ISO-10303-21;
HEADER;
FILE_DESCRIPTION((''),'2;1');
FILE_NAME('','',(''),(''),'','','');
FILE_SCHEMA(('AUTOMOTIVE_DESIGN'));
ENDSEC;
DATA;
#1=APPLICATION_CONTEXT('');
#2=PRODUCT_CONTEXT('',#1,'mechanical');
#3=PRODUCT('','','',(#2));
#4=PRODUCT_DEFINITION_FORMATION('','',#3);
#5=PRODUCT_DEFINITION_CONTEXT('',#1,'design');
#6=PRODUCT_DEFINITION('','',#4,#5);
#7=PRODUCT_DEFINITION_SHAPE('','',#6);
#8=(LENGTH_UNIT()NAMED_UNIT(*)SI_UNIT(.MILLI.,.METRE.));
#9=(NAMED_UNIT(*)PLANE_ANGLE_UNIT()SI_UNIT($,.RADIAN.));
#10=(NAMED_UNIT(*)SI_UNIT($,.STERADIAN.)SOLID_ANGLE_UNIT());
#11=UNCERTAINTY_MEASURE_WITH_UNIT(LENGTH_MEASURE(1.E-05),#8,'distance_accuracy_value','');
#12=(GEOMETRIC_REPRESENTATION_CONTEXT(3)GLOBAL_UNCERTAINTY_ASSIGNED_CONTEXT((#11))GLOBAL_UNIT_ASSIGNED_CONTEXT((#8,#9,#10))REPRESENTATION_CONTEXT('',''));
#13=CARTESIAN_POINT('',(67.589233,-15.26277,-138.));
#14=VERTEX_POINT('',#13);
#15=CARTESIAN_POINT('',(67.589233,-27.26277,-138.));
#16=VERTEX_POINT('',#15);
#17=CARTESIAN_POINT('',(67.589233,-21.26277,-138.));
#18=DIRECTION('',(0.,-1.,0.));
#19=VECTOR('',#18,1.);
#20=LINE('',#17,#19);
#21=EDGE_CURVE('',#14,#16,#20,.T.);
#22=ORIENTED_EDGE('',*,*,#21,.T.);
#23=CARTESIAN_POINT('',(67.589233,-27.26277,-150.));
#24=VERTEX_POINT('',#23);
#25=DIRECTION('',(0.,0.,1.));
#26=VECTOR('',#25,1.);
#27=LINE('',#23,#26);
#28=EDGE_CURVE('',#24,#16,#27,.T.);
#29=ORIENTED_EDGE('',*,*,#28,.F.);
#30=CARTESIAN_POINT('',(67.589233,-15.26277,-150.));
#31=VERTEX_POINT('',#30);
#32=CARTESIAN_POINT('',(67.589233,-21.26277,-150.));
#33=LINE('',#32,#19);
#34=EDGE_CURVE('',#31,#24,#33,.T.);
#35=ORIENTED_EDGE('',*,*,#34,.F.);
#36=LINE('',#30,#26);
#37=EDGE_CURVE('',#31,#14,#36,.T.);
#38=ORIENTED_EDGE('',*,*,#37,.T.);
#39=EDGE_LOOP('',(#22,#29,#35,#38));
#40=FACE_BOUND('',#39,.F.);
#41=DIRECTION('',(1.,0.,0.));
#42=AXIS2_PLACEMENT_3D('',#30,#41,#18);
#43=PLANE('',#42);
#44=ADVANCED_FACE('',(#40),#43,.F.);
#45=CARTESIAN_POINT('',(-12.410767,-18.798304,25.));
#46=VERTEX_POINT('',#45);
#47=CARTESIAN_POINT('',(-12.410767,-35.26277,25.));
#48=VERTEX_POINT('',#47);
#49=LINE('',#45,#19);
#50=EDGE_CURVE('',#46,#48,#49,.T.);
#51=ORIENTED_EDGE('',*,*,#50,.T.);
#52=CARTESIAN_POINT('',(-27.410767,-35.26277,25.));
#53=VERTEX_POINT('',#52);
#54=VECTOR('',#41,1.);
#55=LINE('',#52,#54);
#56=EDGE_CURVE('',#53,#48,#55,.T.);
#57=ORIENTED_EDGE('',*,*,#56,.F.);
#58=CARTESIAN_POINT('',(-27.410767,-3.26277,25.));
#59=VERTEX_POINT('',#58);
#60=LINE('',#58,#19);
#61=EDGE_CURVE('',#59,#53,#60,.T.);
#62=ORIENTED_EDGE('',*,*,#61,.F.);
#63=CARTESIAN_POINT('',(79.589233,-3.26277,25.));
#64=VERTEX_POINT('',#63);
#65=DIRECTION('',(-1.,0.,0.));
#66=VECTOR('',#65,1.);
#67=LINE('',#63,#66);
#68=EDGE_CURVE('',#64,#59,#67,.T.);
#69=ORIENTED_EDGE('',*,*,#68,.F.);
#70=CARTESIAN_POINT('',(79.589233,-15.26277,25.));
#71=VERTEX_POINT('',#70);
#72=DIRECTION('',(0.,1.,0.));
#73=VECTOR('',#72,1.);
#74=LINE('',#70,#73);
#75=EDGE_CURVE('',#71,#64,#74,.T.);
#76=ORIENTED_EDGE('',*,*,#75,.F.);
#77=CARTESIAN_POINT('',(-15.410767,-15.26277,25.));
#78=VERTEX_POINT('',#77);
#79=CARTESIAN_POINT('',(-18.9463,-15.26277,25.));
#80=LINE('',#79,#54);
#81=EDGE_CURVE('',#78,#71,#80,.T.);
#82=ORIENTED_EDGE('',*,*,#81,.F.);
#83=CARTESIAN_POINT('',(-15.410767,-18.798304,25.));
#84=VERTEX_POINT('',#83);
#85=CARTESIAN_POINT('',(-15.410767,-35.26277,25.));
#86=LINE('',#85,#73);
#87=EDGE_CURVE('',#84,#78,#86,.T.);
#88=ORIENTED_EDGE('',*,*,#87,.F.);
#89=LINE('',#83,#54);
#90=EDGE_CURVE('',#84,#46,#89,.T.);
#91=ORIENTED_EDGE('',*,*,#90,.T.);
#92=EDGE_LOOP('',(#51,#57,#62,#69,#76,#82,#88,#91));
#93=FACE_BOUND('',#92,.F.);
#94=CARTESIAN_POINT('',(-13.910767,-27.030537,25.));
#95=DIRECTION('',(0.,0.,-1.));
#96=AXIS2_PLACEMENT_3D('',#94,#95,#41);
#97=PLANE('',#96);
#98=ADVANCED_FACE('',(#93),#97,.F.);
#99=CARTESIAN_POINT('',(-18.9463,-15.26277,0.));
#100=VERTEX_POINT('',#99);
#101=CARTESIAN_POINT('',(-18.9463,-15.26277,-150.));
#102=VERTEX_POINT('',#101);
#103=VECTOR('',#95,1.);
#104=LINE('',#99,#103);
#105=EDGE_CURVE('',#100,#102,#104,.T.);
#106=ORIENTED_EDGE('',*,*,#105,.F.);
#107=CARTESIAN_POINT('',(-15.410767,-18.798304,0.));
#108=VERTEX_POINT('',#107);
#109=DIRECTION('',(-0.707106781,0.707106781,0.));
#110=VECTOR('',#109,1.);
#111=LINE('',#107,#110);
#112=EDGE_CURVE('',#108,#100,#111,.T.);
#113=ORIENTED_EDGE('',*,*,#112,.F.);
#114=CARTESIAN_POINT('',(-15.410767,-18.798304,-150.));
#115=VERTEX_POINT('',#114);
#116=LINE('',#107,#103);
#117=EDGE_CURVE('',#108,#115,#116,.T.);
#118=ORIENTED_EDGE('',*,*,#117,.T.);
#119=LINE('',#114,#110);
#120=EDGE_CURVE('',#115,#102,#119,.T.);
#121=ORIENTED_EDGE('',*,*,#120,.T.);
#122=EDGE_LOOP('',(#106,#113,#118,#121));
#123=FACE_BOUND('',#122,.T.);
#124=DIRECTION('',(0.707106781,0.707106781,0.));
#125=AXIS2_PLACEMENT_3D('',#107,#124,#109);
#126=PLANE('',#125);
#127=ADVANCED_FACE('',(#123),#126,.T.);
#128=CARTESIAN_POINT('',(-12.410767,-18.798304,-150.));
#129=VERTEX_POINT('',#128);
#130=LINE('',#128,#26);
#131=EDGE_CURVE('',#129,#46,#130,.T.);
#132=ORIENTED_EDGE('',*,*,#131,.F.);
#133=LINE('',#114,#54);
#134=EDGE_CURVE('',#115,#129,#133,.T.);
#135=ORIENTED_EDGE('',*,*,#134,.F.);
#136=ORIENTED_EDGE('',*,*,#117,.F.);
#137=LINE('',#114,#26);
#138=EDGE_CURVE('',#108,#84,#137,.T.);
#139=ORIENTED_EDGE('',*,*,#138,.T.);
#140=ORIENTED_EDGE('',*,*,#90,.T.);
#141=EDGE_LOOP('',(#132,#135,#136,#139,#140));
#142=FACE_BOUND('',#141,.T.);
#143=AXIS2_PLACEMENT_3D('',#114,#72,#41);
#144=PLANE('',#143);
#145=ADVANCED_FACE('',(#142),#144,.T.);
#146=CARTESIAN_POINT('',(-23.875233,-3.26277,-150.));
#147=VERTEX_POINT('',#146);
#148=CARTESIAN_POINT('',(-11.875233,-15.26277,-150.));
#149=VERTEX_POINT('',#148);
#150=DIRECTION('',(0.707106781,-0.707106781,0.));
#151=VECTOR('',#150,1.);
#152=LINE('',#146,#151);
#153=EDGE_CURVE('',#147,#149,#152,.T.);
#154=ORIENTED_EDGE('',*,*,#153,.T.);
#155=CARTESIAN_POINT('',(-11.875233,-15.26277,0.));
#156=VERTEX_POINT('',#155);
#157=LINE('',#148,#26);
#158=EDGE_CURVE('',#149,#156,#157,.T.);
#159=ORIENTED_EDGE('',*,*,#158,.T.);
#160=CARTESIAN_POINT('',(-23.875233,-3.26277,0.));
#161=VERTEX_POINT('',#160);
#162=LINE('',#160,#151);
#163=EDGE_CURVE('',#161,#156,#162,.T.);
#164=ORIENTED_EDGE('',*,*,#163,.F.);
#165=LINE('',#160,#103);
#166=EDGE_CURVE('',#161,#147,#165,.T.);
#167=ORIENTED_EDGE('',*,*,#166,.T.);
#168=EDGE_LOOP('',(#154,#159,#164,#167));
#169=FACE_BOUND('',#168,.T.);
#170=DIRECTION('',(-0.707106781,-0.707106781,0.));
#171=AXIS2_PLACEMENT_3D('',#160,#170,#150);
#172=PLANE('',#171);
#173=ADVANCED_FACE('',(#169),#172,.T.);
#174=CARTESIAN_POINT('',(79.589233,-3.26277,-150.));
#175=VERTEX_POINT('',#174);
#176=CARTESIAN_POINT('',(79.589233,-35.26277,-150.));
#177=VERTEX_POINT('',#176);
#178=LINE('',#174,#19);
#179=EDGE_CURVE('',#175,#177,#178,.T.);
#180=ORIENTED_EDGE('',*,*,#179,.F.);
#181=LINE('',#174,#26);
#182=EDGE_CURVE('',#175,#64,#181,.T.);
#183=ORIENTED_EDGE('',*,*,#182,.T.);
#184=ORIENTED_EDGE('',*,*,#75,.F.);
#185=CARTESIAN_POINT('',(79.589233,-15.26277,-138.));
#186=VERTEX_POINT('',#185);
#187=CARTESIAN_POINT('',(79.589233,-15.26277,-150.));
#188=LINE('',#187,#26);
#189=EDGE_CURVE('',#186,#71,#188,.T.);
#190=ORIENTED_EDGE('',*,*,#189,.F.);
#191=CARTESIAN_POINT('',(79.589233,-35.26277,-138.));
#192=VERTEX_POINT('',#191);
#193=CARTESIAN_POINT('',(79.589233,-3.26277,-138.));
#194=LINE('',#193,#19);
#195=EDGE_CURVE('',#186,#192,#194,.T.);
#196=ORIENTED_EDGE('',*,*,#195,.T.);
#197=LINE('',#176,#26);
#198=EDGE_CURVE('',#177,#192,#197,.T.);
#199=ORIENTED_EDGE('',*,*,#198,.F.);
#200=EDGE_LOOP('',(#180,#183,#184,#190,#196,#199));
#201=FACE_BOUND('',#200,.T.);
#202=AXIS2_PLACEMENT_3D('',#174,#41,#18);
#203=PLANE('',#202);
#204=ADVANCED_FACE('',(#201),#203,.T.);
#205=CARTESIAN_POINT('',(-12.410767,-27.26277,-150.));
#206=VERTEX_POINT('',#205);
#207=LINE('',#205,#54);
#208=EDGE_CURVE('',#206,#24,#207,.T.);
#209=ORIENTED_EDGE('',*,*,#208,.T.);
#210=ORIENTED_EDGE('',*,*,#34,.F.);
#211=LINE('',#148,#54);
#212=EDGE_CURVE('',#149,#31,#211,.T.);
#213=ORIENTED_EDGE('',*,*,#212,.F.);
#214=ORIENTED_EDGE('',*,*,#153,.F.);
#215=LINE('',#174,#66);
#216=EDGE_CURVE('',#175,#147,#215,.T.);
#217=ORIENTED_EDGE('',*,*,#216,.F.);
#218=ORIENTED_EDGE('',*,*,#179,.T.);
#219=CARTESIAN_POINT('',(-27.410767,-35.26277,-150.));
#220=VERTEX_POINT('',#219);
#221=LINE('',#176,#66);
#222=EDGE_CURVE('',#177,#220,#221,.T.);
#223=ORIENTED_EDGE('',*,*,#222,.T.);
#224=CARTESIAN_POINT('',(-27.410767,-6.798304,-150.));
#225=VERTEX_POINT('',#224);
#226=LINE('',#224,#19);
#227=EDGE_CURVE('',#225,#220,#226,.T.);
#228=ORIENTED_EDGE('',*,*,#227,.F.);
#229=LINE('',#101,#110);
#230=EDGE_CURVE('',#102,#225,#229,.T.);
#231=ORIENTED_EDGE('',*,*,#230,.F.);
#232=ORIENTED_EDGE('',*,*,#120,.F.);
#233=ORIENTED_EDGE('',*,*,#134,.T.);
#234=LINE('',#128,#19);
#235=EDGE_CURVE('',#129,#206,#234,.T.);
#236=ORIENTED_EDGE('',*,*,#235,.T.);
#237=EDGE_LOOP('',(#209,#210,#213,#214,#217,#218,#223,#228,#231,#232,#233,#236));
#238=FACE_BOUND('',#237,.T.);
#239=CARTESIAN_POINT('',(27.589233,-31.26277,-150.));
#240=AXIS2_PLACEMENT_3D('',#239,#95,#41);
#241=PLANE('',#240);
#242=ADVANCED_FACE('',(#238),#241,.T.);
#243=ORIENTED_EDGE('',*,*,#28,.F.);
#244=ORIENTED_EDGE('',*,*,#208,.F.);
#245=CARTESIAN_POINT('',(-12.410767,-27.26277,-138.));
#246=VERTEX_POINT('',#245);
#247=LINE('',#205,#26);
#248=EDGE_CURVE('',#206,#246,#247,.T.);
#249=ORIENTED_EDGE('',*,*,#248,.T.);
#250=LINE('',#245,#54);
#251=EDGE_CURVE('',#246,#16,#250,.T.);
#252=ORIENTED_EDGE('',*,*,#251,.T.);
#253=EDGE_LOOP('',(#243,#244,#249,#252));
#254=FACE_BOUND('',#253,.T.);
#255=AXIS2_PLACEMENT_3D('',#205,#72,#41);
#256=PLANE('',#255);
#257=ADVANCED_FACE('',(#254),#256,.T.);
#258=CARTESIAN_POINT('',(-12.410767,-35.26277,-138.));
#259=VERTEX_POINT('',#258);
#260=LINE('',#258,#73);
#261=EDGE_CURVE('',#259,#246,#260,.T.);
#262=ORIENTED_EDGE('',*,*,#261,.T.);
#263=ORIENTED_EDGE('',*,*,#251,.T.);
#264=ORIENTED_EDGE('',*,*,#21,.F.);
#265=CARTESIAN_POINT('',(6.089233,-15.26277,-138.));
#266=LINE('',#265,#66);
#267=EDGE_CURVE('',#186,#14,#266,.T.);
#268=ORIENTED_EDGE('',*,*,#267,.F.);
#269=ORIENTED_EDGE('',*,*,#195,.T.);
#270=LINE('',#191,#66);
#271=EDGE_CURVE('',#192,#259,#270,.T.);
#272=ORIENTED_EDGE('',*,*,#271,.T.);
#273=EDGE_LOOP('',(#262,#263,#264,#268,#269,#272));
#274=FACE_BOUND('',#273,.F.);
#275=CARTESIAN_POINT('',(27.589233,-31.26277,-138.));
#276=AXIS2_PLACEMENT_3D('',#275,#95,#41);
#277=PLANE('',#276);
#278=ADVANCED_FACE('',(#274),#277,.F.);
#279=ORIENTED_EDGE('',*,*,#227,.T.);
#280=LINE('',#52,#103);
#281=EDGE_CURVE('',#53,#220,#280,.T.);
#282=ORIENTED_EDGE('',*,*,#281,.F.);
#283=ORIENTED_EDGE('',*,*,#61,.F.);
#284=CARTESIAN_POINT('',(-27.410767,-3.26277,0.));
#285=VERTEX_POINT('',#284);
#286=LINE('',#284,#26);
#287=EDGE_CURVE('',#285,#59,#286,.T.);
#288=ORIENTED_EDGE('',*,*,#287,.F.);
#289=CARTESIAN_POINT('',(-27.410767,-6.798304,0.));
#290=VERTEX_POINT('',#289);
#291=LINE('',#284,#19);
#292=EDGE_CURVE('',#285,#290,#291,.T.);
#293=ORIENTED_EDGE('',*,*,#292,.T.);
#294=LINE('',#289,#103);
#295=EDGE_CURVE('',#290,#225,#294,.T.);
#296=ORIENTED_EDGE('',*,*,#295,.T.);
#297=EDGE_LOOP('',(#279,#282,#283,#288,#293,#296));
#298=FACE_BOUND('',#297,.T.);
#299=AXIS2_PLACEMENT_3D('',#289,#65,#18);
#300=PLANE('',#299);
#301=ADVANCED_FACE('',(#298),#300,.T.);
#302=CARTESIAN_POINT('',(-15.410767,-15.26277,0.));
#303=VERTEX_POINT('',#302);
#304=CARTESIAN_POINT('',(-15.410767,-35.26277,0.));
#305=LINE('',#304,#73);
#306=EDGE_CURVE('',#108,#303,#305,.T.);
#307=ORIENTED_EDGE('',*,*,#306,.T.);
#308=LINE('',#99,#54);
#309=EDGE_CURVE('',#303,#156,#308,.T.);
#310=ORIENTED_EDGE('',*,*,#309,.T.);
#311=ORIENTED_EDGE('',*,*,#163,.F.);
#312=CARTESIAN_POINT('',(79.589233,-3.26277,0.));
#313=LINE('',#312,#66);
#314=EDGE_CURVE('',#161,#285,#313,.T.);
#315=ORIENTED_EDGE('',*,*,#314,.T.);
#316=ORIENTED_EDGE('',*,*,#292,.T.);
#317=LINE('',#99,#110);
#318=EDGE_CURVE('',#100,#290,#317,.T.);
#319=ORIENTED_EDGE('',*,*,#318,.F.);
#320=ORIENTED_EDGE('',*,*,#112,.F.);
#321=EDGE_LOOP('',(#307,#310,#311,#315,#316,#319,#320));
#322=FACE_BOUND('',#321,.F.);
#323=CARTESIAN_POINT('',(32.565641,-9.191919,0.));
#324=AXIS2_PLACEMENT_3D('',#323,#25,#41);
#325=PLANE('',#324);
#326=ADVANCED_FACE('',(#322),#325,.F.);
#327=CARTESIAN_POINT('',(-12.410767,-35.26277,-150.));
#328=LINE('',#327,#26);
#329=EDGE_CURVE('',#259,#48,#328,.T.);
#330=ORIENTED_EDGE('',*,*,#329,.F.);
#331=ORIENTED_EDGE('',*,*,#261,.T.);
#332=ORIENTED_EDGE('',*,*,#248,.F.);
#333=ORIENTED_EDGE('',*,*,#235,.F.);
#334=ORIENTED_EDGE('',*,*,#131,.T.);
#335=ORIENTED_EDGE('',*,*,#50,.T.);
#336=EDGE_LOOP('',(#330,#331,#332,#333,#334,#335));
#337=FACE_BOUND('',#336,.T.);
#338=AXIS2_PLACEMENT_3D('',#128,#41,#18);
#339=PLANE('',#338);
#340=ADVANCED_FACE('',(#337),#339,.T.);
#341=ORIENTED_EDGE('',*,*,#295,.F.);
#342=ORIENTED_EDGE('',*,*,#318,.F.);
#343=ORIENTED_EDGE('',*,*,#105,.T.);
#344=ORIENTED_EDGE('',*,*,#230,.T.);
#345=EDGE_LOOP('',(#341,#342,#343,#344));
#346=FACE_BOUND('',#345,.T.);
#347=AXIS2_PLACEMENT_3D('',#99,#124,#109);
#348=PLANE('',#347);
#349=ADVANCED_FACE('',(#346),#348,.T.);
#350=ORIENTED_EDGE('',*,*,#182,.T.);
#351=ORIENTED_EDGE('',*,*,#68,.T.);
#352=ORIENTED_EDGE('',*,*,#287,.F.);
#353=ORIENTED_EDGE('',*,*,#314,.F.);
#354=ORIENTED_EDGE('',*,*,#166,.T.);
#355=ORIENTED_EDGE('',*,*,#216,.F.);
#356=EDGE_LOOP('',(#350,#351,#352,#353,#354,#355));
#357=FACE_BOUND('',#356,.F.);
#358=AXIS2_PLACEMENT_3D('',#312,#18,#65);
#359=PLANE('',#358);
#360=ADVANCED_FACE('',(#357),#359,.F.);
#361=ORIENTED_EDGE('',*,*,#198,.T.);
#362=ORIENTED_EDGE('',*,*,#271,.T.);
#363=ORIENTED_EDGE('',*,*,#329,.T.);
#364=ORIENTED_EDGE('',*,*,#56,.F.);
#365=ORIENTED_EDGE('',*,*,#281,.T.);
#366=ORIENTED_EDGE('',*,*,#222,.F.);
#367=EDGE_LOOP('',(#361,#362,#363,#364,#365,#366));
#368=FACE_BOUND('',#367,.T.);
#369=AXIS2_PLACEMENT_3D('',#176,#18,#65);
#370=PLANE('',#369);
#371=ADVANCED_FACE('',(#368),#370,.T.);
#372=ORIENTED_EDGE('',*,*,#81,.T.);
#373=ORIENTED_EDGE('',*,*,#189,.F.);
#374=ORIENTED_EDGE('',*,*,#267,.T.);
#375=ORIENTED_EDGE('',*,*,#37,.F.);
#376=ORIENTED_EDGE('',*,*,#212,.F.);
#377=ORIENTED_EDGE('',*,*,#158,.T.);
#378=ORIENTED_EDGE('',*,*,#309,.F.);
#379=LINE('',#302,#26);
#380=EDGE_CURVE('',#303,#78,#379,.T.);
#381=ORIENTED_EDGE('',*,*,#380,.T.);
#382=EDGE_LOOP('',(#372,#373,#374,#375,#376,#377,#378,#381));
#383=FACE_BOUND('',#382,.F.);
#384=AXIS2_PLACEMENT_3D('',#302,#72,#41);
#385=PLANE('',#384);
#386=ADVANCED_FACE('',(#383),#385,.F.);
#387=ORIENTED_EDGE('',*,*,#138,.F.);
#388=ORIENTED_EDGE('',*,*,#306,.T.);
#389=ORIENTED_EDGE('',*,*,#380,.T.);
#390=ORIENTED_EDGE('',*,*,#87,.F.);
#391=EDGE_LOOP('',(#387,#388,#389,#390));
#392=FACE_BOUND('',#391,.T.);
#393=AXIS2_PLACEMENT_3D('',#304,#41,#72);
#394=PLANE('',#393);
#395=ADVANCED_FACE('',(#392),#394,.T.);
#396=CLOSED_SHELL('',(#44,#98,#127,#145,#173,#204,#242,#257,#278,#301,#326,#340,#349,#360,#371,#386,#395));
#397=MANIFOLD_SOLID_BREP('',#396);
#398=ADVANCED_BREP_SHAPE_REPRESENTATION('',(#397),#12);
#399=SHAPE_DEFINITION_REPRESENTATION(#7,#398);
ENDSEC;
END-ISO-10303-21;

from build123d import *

# Parameters (mm, degrees)
F1_DEPTH = 25
F2_DEPTH = 150
F4_DEPTH = 175
F5_W     = 12
F5_H     = 8
F5_H_2   = 12
F6_DEPTH = 12


with BuildPart() as f1:
    # F0 (on Top) → F1 (new body)
    with BuildSketch(Plane.XY):
        Polygon((-15.4107665035, -11.7272357842), (-11.8752325976, -15.2627696901), (79.5892334965, -15.2627696901), (79.5892334965, -3.2627696901), (-15.4107665035, -3.2627696901), align=None)
        Polygon((-23.8752325976, -3.2627696901), (-15.4107665035, -11.7272357842), (-15.4107665035, -3.2627696901), align=None)
        Polygon((-18.9463004094, -15.2627696901), (-15.4107665035, -15.2627696901), (-27.4107665035, -3.2627696901), (-27.4107665035, -6.7983035961), align=None)
        Polygon((-27.4107665035, -15.2627696901), (-18.9463004094, -15.2627696901), (-27.4107665035, -6.7983035961), align=None)
        Polygon((-15.4107665035, -18.7983035961), (-18.9463004094, -15.2627696901), (-27.4107665035, -15.2627696901), (-27.4107665035, -35.2627696901), (-15.4107665035, -35.2627696901), align=None)
        Polygon((-27.4107665035, -3.2627696901), (-15.4107665035, -15.2627696901), (-15.4107665035, -11.7272357842), (-23.8752325976, -3.2627696901), align=None)
        Polygon((-15.4107665035, -11.7272357842), (-15.4107665035, -15.2627696901), (-11.8752325976, -15.2627696901), align=None)
        Polygon((-15.4107665035, -18.7983035961), (-15.4107665035, -15.2627696901), (-18.9463004094, -15.2627696901), align=None)
    extrude(amount=F1_DEPTH)

    # F0 (on Top) → F2 (join)
    with BuildSketch(Plane.XY):
        Polygon((-15.4107665035, -18.7983035961), (-18.9463004094, -15.2627696901), (-27.4107665035, -15.2627696901), (-27.4107665035, -35.2627696901), (-15.4107665035, -35.2627696901), align=None)
        Polygon((-23.8752325976, -3.2627696901), (-15.4107665035, -11.7272357842), (-15.4107665035, -3.2627696901), align=None)
        Polygon((-15.4107665035, -11.7272357842), (-11.8752325976, -15.2627696901), (79.5892334965, -15.2627696901), (79.5892334965, -3.2627696901), (-15.4107665035, -3.2627696901), align=None)
        Polygon((-27.4107665035, -15.2627696901), (-18.9463004094, -15.2627696901), (-27.4107665035, -6.7983035961), align=None)
    extrude(amount=-F2_DEPTH)

    # F3 (on face) → F4 (join, through all)
    with BuildSketch(Plane(origin=(0, 0, -150), x_dir=(1, 0, 0), z_dir=(0, 0, -1))):
        Polygon((-15.4107665035, 30.7983035961), (-15.4107665035, 18.7983035961), (-12.4107665035, 18.7983035961), (-12.4107665035, 30.7983035961), (-12.4107665035, 35.2627696901), (-15.4107665035, 35.2627696901), align=None)
    extrude(amount=-F4_DEPTH)

    # F5 (on face) → F6 (join)
    with BuildSketch(Plane(origin=(0, 0, -150), x_dir=(1, 0, 0), z_dir=(0, 0, -1))):
        Polygon((-12.4107665035, 35.2627696901), (-12.4107665035, 30.7983035961), (-12.4107665035, 27.2627696901), (67.5892334965, 27.2627696901), (67.5892334965, 35.2627696901), align=None)
        with Locations((73.5892334965, 31.2627696901)):
            Rectangle(F5_W, F5_H)
        with Locations((73.5892334965, 21.2627696901)):
            Rectangle(F5_W, F5_H_2)
        Polygon((79.5892334965, 15.2627696901), (67.5892334965, 15.2627696901), (-11.8752325976, 15.2627696901), (-23.8752325976, 3.2627696901), (79.5892334965, 3.2627696901), align=None)
    extrude(amount=-F6_DEPTH)


solid = f1.part
